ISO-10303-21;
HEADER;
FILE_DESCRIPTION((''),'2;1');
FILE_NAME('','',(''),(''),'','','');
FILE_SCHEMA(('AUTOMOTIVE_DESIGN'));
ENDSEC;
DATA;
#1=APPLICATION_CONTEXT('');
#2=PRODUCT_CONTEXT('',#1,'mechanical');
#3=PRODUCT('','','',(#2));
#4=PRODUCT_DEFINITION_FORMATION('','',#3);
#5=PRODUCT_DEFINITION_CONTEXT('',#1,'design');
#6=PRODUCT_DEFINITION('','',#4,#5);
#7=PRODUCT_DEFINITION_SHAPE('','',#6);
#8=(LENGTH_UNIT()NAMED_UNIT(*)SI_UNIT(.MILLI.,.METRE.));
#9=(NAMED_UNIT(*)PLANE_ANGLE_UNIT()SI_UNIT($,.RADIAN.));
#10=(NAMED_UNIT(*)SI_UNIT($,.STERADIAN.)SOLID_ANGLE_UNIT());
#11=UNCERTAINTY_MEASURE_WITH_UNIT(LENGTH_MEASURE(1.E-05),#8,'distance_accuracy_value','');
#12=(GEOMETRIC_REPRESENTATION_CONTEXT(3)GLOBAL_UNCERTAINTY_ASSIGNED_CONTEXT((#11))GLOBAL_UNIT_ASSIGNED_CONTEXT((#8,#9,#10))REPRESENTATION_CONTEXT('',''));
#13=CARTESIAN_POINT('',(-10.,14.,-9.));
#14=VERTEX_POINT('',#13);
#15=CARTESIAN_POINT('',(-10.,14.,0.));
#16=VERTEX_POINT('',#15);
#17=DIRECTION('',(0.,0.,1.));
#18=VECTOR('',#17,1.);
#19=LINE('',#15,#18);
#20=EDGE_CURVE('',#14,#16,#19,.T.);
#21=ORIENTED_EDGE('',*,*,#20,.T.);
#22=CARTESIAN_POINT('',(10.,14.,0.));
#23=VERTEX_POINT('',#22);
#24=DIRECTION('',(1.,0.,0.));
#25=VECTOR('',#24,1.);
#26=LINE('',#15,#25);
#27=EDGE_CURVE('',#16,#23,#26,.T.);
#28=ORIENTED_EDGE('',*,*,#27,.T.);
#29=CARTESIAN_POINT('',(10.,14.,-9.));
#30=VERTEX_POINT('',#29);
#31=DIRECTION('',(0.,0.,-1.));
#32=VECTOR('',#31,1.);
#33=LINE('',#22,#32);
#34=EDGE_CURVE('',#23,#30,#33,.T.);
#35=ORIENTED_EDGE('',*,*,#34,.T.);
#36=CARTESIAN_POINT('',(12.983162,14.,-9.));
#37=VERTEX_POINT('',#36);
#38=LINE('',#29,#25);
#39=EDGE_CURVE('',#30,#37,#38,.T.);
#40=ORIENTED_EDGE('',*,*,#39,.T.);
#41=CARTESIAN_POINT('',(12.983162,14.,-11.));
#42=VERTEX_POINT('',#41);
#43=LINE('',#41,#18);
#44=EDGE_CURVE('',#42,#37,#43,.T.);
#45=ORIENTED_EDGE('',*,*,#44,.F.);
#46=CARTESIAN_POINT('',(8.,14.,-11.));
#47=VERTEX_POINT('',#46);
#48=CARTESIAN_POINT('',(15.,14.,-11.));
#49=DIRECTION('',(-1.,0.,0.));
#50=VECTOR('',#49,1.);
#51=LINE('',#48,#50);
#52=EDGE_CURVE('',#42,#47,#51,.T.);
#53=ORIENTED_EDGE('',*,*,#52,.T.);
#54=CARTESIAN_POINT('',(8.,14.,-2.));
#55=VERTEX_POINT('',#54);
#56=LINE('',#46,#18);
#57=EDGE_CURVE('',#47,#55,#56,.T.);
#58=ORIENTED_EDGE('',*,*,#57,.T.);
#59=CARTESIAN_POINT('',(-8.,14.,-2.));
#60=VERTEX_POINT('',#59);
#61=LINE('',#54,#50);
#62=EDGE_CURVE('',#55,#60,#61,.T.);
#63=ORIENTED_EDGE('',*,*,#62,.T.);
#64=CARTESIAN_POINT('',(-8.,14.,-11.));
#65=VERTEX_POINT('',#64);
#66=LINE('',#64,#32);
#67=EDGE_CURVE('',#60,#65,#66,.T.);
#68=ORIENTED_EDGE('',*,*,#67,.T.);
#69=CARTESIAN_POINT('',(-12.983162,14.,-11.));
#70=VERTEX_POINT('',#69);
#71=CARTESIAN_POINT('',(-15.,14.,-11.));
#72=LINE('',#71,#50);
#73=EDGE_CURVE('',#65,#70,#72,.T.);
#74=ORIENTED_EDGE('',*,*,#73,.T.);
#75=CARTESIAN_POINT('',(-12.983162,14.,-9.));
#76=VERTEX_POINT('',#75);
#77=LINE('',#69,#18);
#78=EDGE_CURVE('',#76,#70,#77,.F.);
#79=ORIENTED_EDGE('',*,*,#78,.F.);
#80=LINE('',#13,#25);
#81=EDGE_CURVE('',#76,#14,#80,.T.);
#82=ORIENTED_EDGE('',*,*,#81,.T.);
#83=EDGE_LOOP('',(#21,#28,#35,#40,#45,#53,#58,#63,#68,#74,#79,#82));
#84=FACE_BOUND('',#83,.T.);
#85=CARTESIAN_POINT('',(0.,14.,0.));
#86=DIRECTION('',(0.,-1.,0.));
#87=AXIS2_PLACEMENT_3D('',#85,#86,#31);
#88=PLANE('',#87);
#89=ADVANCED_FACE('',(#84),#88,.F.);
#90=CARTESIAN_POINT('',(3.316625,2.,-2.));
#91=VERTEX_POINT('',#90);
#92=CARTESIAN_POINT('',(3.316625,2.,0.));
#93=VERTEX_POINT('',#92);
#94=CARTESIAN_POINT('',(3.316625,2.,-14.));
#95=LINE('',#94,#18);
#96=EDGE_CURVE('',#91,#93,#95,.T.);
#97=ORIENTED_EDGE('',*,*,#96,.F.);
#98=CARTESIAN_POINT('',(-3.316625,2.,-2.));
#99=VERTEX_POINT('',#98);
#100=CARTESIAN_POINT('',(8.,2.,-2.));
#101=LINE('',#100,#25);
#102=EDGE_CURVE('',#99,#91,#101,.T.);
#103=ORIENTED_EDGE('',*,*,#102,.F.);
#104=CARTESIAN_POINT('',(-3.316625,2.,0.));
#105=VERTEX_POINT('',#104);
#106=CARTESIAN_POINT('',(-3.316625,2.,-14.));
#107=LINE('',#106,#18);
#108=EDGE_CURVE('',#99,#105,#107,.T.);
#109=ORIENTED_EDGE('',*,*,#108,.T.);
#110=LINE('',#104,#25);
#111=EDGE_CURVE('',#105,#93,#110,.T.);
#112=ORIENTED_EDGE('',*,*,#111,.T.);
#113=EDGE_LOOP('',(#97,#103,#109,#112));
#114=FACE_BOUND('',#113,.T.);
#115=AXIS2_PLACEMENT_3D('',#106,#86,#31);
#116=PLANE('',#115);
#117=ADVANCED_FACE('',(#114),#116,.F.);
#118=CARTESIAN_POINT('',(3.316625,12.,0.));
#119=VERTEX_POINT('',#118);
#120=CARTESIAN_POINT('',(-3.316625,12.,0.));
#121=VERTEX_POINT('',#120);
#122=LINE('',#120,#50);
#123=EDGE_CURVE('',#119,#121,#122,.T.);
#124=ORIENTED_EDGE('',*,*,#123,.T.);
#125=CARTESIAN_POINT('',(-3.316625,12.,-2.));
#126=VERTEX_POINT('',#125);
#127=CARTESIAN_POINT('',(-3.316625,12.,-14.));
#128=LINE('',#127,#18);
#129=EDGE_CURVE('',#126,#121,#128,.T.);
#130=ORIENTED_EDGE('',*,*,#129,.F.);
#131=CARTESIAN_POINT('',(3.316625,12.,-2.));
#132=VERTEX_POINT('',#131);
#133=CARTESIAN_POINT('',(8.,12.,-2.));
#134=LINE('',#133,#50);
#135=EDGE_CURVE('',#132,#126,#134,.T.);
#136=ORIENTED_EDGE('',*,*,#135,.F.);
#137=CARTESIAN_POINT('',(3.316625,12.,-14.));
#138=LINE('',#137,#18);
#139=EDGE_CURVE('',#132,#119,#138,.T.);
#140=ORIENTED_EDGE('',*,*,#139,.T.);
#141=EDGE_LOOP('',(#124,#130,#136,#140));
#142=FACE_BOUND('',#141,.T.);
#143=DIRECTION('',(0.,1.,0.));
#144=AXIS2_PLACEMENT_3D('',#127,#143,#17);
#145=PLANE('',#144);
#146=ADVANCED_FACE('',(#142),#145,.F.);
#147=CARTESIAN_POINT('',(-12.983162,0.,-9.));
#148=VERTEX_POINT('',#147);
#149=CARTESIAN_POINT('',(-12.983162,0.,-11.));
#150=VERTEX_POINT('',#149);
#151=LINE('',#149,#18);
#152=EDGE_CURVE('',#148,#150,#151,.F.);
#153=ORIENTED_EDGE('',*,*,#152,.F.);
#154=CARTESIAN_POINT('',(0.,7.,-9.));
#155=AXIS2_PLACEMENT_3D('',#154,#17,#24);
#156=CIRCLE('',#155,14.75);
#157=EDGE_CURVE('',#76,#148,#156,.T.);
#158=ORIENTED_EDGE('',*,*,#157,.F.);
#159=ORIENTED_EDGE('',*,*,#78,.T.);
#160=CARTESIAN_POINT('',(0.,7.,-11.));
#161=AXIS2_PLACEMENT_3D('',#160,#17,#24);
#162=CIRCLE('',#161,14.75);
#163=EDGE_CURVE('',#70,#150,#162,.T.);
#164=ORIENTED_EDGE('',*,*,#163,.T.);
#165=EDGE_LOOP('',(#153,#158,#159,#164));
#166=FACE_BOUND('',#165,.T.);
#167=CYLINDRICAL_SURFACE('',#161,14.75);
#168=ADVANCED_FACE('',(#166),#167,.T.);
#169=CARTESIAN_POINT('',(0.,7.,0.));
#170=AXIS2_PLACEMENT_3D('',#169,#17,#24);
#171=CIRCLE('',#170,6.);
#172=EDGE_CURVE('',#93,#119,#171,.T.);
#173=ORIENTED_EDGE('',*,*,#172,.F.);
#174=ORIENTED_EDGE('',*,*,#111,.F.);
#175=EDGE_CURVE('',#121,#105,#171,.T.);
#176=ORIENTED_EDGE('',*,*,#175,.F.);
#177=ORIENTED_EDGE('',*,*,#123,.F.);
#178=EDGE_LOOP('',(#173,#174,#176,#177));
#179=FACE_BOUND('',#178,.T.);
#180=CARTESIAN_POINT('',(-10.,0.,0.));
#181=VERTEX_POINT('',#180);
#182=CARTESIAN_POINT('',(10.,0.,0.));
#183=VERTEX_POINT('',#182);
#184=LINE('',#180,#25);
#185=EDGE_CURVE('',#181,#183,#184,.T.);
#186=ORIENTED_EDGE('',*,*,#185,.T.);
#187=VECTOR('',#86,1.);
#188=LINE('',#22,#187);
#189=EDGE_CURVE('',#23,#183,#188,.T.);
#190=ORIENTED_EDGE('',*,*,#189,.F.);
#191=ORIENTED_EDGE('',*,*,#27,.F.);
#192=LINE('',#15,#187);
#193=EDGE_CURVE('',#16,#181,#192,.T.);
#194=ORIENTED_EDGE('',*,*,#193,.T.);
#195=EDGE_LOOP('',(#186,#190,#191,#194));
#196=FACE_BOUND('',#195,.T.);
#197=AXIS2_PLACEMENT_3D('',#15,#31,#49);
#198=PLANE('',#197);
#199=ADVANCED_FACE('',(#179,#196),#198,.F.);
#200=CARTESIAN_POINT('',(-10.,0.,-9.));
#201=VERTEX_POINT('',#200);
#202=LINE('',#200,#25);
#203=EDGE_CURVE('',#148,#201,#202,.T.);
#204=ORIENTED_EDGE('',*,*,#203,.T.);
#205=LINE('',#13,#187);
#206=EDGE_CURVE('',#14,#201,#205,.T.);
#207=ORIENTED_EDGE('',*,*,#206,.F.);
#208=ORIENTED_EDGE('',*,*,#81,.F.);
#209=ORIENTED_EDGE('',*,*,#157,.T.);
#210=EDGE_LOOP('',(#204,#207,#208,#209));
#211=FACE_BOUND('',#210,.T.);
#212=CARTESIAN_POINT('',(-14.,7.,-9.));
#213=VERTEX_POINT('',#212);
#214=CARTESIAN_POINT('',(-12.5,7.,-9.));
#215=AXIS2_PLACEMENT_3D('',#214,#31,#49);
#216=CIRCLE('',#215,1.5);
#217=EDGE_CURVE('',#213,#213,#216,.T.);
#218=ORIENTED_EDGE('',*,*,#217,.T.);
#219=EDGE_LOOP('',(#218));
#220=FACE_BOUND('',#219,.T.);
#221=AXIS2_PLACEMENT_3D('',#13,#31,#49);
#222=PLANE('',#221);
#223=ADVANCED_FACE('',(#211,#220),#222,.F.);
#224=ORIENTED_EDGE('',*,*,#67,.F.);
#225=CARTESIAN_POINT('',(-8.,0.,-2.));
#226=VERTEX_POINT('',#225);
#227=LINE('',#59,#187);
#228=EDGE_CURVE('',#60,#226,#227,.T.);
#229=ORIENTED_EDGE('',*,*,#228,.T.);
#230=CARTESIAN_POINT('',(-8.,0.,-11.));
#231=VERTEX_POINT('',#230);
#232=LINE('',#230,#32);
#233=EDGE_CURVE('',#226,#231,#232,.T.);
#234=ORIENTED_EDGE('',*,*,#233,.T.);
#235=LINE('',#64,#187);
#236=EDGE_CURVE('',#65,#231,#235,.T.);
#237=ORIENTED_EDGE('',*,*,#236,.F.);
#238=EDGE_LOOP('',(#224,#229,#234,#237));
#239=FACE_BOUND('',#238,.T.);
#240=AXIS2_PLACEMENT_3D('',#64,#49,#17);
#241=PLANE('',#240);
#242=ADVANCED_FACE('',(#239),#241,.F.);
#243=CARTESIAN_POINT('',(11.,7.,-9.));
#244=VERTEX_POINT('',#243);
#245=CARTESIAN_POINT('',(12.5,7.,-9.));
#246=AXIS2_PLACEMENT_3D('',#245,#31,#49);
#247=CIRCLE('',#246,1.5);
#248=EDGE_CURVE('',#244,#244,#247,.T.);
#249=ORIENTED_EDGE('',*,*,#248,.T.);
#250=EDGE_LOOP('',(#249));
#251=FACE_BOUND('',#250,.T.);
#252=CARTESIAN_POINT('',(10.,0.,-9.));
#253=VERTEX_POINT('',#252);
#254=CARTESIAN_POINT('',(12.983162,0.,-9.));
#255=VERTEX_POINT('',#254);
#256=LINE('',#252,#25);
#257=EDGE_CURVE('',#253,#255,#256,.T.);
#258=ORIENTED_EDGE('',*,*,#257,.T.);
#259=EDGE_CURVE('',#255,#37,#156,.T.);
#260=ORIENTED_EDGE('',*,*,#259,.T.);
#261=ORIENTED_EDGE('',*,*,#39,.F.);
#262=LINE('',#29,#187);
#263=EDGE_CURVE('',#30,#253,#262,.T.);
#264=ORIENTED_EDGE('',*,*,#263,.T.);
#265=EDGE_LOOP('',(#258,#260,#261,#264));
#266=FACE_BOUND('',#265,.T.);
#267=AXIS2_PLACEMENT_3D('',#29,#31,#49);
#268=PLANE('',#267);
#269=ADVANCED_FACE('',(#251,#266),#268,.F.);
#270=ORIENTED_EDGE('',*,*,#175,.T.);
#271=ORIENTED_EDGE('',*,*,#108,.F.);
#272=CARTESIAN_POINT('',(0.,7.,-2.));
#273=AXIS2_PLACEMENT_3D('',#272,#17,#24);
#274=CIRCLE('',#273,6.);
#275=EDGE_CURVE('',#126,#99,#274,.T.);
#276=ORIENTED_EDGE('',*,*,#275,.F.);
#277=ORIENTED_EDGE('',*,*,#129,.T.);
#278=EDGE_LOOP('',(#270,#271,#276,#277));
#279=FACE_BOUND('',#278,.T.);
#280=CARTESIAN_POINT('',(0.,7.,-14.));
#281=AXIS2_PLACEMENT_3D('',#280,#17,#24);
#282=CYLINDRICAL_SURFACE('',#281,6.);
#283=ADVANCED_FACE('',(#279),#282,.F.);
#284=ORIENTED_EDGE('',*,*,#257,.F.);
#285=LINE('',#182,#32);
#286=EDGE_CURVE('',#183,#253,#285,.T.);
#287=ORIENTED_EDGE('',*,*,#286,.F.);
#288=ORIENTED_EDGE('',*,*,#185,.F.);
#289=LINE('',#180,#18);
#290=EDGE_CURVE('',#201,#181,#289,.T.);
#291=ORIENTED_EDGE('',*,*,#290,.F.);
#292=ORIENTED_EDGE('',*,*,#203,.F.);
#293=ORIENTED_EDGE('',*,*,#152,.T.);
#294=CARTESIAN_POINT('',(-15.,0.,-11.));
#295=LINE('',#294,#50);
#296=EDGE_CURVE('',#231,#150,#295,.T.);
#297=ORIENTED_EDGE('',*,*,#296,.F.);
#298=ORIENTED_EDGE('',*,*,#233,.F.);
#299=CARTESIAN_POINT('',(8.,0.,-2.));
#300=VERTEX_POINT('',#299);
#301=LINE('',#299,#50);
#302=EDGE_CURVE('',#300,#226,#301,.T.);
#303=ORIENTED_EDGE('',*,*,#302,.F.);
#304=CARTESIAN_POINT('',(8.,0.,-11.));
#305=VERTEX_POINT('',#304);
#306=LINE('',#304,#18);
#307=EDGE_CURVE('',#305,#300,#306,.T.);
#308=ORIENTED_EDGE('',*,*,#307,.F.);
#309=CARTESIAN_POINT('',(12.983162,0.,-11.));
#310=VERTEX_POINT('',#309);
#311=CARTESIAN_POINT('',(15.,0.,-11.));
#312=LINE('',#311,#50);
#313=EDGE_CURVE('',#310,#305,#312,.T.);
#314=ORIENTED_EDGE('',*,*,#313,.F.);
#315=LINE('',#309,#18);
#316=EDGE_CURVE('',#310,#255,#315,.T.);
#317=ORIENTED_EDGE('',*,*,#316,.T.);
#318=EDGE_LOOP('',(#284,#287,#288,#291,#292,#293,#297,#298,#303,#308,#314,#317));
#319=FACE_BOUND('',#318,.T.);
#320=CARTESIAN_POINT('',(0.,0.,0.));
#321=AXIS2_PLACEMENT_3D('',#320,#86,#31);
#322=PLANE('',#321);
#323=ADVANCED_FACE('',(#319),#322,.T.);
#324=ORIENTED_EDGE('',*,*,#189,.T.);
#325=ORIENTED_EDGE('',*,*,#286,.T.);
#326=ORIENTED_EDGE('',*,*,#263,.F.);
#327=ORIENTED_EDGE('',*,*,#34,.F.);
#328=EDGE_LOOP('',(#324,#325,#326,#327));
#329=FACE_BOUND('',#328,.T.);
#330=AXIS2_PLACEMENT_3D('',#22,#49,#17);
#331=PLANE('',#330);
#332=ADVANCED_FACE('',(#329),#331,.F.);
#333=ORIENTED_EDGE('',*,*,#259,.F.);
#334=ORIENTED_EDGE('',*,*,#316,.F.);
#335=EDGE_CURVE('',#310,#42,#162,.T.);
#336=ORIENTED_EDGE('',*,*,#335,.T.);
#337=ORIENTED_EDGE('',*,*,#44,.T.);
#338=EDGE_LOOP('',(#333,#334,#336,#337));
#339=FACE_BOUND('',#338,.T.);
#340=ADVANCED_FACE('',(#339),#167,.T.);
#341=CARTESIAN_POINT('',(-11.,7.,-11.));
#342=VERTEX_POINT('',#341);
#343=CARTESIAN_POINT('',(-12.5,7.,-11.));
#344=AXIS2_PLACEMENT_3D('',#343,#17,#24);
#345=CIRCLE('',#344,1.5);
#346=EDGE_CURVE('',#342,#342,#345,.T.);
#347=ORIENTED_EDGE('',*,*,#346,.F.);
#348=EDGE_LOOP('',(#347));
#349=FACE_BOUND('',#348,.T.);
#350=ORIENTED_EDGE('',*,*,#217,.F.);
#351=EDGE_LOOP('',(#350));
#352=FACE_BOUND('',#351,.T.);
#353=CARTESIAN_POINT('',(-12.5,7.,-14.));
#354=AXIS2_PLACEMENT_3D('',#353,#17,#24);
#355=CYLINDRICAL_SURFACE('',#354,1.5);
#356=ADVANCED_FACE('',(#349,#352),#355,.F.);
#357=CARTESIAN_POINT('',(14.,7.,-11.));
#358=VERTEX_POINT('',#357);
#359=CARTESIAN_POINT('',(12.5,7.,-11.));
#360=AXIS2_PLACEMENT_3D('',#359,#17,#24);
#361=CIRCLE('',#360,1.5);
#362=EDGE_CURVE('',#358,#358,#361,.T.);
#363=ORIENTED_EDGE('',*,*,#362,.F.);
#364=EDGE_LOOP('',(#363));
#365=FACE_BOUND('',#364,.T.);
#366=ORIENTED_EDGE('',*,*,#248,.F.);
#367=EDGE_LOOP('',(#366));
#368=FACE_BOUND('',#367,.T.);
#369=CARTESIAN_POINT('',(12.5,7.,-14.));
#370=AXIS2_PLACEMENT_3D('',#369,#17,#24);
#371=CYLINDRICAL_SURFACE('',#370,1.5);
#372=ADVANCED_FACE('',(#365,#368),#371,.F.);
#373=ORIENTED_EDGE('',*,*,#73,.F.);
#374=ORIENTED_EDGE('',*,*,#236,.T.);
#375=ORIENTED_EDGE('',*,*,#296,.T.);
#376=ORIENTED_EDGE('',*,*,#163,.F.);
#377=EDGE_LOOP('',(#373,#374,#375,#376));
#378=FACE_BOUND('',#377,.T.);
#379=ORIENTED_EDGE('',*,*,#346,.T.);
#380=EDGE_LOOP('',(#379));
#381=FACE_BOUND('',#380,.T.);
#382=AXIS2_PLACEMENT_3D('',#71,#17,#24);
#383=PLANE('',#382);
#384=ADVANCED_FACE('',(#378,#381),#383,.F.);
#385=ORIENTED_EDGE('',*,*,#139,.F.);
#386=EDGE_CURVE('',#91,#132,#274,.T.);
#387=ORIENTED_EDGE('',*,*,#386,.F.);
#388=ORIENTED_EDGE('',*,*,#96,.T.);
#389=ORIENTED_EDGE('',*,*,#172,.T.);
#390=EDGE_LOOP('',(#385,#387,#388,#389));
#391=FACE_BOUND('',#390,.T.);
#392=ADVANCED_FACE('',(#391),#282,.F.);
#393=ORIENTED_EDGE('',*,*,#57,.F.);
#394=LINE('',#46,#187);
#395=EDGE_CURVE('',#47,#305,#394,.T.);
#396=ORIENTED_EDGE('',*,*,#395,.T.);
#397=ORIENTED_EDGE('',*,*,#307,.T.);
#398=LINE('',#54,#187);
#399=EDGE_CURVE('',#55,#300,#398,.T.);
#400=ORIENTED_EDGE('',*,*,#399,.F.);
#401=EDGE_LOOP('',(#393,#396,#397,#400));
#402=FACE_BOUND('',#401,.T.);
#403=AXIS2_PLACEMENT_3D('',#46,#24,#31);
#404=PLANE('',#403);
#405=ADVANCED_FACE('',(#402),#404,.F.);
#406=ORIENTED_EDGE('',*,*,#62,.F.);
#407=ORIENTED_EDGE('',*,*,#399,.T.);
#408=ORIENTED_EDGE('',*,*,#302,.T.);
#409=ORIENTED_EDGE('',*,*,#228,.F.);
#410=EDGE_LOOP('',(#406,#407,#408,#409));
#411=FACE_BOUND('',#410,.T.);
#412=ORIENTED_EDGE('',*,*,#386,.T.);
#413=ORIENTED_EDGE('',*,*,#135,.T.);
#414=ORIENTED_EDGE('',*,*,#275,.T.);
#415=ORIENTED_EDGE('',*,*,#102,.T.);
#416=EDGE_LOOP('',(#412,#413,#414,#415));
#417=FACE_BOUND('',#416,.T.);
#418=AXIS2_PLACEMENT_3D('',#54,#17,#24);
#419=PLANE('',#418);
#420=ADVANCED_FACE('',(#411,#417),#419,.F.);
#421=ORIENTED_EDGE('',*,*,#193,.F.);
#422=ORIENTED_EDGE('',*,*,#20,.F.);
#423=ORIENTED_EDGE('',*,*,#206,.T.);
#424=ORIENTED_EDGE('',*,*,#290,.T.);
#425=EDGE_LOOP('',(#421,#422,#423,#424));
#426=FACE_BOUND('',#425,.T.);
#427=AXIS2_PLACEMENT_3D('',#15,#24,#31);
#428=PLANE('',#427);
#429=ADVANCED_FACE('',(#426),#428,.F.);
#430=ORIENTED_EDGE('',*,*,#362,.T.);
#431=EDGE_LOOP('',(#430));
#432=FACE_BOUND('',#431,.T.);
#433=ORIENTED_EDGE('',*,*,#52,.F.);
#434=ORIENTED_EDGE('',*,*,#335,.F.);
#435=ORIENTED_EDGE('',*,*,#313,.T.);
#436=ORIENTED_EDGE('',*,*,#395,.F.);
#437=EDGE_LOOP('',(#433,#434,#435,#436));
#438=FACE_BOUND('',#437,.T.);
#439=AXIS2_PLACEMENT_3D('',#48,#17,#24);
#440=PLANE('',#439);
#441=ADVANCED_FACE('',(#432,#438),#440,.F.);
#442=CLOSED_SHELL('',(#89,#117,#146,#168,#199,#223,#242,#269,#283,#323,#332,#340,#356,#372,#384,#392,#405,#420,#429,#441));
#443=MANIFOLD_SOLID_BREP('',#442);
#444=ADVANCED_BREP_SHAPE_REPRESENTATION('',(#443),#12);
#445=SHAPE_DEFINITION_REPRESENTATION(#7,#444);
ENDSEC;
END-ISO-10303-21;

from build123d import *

# Parameters (mm, degrees)
BOSS_EXTRUDE1_DEPTH = 14
SKETCH3_R           = 1.5
CUT_EXTRUDE1_DEPTH  = 14
CUT_EXTRUDE2_START  = -2
CUT_EXTRUDE2_DEPTH  = 2


# Read off the part's stored shape, not the designer's step: Cut-Extrude2
with BuildPart() as part:
    # Sketch2 → Boss-Extrude1 (new body)
    with BuildSketch(Plane(origin=(0, 0, 0), x_dir=(1, 0, 0), z_dir=(0, 1, 0))):
        Polygon((-10, 0), (10, 0), (10, 9), (15, 9), (15, 11), (8, 11), (8, 2), (-8, 2), (-8, 11), (-15, 11), (-15, 9), (-10, 9), align=None)
    extrude(amount=BOSS_EXTRUDE1_DEPTH)

    # Sketch3 → Cut-Extrude1 (cut)
    with BuildSketch(Plane.XY):
        with Locations((-12.5, 7)):
            Circle(SKETCH3_R)
        with Locations((12.5, 7)):
            Circle(SKETCH3_R)
        with BuildLine():
            Line((-3.31662479, 2), (3.31662479, 2))
            ThreePointArc((3.31662479, 2), (6, 7), (3.31662479, 12))
            Line((3.31662479, 12), (-3.31662479, 12))
            ThreePointArc((-3.31662479, 12), (-6, 7), (-3.31662479, 2))
        make_face()
    extrude(amount=-CUT_EXTRUDE1_DEPTH, mode=Mode.SUBTRACT)

    # Cut-Extrude2 outline → Cut-Extrude2 (cut)
    with BuildSketch(Plane.XY.offset(-9).offset(CUT_EXTRUDE2_START)):
        with BuildLine():
            ThreePointArc((-12.983162173, 0), (-14.75, 7), (-12.983162173, 14))
            Line((-12.983162173, 14), (-15, 14))
            Line((-15, 14), (-15, 0))
            Line((-15, 0), (-12.983162173, 0))
        make_face()
        with BuildLine():
            Line((15, 14), (12.983162173, 14))
            ThreePointArc((12.983162173, 14), (14.75, 7), (12.983162173, 0))
            Line((12.983162173, 0), (15, 0))
            Line((15, 0), (15, 14))
        make_face()
    extrude(amount=CUT_EXTRUDE2_DEPTH, mode=Mode.SUBTRACT)


solid = part.part
